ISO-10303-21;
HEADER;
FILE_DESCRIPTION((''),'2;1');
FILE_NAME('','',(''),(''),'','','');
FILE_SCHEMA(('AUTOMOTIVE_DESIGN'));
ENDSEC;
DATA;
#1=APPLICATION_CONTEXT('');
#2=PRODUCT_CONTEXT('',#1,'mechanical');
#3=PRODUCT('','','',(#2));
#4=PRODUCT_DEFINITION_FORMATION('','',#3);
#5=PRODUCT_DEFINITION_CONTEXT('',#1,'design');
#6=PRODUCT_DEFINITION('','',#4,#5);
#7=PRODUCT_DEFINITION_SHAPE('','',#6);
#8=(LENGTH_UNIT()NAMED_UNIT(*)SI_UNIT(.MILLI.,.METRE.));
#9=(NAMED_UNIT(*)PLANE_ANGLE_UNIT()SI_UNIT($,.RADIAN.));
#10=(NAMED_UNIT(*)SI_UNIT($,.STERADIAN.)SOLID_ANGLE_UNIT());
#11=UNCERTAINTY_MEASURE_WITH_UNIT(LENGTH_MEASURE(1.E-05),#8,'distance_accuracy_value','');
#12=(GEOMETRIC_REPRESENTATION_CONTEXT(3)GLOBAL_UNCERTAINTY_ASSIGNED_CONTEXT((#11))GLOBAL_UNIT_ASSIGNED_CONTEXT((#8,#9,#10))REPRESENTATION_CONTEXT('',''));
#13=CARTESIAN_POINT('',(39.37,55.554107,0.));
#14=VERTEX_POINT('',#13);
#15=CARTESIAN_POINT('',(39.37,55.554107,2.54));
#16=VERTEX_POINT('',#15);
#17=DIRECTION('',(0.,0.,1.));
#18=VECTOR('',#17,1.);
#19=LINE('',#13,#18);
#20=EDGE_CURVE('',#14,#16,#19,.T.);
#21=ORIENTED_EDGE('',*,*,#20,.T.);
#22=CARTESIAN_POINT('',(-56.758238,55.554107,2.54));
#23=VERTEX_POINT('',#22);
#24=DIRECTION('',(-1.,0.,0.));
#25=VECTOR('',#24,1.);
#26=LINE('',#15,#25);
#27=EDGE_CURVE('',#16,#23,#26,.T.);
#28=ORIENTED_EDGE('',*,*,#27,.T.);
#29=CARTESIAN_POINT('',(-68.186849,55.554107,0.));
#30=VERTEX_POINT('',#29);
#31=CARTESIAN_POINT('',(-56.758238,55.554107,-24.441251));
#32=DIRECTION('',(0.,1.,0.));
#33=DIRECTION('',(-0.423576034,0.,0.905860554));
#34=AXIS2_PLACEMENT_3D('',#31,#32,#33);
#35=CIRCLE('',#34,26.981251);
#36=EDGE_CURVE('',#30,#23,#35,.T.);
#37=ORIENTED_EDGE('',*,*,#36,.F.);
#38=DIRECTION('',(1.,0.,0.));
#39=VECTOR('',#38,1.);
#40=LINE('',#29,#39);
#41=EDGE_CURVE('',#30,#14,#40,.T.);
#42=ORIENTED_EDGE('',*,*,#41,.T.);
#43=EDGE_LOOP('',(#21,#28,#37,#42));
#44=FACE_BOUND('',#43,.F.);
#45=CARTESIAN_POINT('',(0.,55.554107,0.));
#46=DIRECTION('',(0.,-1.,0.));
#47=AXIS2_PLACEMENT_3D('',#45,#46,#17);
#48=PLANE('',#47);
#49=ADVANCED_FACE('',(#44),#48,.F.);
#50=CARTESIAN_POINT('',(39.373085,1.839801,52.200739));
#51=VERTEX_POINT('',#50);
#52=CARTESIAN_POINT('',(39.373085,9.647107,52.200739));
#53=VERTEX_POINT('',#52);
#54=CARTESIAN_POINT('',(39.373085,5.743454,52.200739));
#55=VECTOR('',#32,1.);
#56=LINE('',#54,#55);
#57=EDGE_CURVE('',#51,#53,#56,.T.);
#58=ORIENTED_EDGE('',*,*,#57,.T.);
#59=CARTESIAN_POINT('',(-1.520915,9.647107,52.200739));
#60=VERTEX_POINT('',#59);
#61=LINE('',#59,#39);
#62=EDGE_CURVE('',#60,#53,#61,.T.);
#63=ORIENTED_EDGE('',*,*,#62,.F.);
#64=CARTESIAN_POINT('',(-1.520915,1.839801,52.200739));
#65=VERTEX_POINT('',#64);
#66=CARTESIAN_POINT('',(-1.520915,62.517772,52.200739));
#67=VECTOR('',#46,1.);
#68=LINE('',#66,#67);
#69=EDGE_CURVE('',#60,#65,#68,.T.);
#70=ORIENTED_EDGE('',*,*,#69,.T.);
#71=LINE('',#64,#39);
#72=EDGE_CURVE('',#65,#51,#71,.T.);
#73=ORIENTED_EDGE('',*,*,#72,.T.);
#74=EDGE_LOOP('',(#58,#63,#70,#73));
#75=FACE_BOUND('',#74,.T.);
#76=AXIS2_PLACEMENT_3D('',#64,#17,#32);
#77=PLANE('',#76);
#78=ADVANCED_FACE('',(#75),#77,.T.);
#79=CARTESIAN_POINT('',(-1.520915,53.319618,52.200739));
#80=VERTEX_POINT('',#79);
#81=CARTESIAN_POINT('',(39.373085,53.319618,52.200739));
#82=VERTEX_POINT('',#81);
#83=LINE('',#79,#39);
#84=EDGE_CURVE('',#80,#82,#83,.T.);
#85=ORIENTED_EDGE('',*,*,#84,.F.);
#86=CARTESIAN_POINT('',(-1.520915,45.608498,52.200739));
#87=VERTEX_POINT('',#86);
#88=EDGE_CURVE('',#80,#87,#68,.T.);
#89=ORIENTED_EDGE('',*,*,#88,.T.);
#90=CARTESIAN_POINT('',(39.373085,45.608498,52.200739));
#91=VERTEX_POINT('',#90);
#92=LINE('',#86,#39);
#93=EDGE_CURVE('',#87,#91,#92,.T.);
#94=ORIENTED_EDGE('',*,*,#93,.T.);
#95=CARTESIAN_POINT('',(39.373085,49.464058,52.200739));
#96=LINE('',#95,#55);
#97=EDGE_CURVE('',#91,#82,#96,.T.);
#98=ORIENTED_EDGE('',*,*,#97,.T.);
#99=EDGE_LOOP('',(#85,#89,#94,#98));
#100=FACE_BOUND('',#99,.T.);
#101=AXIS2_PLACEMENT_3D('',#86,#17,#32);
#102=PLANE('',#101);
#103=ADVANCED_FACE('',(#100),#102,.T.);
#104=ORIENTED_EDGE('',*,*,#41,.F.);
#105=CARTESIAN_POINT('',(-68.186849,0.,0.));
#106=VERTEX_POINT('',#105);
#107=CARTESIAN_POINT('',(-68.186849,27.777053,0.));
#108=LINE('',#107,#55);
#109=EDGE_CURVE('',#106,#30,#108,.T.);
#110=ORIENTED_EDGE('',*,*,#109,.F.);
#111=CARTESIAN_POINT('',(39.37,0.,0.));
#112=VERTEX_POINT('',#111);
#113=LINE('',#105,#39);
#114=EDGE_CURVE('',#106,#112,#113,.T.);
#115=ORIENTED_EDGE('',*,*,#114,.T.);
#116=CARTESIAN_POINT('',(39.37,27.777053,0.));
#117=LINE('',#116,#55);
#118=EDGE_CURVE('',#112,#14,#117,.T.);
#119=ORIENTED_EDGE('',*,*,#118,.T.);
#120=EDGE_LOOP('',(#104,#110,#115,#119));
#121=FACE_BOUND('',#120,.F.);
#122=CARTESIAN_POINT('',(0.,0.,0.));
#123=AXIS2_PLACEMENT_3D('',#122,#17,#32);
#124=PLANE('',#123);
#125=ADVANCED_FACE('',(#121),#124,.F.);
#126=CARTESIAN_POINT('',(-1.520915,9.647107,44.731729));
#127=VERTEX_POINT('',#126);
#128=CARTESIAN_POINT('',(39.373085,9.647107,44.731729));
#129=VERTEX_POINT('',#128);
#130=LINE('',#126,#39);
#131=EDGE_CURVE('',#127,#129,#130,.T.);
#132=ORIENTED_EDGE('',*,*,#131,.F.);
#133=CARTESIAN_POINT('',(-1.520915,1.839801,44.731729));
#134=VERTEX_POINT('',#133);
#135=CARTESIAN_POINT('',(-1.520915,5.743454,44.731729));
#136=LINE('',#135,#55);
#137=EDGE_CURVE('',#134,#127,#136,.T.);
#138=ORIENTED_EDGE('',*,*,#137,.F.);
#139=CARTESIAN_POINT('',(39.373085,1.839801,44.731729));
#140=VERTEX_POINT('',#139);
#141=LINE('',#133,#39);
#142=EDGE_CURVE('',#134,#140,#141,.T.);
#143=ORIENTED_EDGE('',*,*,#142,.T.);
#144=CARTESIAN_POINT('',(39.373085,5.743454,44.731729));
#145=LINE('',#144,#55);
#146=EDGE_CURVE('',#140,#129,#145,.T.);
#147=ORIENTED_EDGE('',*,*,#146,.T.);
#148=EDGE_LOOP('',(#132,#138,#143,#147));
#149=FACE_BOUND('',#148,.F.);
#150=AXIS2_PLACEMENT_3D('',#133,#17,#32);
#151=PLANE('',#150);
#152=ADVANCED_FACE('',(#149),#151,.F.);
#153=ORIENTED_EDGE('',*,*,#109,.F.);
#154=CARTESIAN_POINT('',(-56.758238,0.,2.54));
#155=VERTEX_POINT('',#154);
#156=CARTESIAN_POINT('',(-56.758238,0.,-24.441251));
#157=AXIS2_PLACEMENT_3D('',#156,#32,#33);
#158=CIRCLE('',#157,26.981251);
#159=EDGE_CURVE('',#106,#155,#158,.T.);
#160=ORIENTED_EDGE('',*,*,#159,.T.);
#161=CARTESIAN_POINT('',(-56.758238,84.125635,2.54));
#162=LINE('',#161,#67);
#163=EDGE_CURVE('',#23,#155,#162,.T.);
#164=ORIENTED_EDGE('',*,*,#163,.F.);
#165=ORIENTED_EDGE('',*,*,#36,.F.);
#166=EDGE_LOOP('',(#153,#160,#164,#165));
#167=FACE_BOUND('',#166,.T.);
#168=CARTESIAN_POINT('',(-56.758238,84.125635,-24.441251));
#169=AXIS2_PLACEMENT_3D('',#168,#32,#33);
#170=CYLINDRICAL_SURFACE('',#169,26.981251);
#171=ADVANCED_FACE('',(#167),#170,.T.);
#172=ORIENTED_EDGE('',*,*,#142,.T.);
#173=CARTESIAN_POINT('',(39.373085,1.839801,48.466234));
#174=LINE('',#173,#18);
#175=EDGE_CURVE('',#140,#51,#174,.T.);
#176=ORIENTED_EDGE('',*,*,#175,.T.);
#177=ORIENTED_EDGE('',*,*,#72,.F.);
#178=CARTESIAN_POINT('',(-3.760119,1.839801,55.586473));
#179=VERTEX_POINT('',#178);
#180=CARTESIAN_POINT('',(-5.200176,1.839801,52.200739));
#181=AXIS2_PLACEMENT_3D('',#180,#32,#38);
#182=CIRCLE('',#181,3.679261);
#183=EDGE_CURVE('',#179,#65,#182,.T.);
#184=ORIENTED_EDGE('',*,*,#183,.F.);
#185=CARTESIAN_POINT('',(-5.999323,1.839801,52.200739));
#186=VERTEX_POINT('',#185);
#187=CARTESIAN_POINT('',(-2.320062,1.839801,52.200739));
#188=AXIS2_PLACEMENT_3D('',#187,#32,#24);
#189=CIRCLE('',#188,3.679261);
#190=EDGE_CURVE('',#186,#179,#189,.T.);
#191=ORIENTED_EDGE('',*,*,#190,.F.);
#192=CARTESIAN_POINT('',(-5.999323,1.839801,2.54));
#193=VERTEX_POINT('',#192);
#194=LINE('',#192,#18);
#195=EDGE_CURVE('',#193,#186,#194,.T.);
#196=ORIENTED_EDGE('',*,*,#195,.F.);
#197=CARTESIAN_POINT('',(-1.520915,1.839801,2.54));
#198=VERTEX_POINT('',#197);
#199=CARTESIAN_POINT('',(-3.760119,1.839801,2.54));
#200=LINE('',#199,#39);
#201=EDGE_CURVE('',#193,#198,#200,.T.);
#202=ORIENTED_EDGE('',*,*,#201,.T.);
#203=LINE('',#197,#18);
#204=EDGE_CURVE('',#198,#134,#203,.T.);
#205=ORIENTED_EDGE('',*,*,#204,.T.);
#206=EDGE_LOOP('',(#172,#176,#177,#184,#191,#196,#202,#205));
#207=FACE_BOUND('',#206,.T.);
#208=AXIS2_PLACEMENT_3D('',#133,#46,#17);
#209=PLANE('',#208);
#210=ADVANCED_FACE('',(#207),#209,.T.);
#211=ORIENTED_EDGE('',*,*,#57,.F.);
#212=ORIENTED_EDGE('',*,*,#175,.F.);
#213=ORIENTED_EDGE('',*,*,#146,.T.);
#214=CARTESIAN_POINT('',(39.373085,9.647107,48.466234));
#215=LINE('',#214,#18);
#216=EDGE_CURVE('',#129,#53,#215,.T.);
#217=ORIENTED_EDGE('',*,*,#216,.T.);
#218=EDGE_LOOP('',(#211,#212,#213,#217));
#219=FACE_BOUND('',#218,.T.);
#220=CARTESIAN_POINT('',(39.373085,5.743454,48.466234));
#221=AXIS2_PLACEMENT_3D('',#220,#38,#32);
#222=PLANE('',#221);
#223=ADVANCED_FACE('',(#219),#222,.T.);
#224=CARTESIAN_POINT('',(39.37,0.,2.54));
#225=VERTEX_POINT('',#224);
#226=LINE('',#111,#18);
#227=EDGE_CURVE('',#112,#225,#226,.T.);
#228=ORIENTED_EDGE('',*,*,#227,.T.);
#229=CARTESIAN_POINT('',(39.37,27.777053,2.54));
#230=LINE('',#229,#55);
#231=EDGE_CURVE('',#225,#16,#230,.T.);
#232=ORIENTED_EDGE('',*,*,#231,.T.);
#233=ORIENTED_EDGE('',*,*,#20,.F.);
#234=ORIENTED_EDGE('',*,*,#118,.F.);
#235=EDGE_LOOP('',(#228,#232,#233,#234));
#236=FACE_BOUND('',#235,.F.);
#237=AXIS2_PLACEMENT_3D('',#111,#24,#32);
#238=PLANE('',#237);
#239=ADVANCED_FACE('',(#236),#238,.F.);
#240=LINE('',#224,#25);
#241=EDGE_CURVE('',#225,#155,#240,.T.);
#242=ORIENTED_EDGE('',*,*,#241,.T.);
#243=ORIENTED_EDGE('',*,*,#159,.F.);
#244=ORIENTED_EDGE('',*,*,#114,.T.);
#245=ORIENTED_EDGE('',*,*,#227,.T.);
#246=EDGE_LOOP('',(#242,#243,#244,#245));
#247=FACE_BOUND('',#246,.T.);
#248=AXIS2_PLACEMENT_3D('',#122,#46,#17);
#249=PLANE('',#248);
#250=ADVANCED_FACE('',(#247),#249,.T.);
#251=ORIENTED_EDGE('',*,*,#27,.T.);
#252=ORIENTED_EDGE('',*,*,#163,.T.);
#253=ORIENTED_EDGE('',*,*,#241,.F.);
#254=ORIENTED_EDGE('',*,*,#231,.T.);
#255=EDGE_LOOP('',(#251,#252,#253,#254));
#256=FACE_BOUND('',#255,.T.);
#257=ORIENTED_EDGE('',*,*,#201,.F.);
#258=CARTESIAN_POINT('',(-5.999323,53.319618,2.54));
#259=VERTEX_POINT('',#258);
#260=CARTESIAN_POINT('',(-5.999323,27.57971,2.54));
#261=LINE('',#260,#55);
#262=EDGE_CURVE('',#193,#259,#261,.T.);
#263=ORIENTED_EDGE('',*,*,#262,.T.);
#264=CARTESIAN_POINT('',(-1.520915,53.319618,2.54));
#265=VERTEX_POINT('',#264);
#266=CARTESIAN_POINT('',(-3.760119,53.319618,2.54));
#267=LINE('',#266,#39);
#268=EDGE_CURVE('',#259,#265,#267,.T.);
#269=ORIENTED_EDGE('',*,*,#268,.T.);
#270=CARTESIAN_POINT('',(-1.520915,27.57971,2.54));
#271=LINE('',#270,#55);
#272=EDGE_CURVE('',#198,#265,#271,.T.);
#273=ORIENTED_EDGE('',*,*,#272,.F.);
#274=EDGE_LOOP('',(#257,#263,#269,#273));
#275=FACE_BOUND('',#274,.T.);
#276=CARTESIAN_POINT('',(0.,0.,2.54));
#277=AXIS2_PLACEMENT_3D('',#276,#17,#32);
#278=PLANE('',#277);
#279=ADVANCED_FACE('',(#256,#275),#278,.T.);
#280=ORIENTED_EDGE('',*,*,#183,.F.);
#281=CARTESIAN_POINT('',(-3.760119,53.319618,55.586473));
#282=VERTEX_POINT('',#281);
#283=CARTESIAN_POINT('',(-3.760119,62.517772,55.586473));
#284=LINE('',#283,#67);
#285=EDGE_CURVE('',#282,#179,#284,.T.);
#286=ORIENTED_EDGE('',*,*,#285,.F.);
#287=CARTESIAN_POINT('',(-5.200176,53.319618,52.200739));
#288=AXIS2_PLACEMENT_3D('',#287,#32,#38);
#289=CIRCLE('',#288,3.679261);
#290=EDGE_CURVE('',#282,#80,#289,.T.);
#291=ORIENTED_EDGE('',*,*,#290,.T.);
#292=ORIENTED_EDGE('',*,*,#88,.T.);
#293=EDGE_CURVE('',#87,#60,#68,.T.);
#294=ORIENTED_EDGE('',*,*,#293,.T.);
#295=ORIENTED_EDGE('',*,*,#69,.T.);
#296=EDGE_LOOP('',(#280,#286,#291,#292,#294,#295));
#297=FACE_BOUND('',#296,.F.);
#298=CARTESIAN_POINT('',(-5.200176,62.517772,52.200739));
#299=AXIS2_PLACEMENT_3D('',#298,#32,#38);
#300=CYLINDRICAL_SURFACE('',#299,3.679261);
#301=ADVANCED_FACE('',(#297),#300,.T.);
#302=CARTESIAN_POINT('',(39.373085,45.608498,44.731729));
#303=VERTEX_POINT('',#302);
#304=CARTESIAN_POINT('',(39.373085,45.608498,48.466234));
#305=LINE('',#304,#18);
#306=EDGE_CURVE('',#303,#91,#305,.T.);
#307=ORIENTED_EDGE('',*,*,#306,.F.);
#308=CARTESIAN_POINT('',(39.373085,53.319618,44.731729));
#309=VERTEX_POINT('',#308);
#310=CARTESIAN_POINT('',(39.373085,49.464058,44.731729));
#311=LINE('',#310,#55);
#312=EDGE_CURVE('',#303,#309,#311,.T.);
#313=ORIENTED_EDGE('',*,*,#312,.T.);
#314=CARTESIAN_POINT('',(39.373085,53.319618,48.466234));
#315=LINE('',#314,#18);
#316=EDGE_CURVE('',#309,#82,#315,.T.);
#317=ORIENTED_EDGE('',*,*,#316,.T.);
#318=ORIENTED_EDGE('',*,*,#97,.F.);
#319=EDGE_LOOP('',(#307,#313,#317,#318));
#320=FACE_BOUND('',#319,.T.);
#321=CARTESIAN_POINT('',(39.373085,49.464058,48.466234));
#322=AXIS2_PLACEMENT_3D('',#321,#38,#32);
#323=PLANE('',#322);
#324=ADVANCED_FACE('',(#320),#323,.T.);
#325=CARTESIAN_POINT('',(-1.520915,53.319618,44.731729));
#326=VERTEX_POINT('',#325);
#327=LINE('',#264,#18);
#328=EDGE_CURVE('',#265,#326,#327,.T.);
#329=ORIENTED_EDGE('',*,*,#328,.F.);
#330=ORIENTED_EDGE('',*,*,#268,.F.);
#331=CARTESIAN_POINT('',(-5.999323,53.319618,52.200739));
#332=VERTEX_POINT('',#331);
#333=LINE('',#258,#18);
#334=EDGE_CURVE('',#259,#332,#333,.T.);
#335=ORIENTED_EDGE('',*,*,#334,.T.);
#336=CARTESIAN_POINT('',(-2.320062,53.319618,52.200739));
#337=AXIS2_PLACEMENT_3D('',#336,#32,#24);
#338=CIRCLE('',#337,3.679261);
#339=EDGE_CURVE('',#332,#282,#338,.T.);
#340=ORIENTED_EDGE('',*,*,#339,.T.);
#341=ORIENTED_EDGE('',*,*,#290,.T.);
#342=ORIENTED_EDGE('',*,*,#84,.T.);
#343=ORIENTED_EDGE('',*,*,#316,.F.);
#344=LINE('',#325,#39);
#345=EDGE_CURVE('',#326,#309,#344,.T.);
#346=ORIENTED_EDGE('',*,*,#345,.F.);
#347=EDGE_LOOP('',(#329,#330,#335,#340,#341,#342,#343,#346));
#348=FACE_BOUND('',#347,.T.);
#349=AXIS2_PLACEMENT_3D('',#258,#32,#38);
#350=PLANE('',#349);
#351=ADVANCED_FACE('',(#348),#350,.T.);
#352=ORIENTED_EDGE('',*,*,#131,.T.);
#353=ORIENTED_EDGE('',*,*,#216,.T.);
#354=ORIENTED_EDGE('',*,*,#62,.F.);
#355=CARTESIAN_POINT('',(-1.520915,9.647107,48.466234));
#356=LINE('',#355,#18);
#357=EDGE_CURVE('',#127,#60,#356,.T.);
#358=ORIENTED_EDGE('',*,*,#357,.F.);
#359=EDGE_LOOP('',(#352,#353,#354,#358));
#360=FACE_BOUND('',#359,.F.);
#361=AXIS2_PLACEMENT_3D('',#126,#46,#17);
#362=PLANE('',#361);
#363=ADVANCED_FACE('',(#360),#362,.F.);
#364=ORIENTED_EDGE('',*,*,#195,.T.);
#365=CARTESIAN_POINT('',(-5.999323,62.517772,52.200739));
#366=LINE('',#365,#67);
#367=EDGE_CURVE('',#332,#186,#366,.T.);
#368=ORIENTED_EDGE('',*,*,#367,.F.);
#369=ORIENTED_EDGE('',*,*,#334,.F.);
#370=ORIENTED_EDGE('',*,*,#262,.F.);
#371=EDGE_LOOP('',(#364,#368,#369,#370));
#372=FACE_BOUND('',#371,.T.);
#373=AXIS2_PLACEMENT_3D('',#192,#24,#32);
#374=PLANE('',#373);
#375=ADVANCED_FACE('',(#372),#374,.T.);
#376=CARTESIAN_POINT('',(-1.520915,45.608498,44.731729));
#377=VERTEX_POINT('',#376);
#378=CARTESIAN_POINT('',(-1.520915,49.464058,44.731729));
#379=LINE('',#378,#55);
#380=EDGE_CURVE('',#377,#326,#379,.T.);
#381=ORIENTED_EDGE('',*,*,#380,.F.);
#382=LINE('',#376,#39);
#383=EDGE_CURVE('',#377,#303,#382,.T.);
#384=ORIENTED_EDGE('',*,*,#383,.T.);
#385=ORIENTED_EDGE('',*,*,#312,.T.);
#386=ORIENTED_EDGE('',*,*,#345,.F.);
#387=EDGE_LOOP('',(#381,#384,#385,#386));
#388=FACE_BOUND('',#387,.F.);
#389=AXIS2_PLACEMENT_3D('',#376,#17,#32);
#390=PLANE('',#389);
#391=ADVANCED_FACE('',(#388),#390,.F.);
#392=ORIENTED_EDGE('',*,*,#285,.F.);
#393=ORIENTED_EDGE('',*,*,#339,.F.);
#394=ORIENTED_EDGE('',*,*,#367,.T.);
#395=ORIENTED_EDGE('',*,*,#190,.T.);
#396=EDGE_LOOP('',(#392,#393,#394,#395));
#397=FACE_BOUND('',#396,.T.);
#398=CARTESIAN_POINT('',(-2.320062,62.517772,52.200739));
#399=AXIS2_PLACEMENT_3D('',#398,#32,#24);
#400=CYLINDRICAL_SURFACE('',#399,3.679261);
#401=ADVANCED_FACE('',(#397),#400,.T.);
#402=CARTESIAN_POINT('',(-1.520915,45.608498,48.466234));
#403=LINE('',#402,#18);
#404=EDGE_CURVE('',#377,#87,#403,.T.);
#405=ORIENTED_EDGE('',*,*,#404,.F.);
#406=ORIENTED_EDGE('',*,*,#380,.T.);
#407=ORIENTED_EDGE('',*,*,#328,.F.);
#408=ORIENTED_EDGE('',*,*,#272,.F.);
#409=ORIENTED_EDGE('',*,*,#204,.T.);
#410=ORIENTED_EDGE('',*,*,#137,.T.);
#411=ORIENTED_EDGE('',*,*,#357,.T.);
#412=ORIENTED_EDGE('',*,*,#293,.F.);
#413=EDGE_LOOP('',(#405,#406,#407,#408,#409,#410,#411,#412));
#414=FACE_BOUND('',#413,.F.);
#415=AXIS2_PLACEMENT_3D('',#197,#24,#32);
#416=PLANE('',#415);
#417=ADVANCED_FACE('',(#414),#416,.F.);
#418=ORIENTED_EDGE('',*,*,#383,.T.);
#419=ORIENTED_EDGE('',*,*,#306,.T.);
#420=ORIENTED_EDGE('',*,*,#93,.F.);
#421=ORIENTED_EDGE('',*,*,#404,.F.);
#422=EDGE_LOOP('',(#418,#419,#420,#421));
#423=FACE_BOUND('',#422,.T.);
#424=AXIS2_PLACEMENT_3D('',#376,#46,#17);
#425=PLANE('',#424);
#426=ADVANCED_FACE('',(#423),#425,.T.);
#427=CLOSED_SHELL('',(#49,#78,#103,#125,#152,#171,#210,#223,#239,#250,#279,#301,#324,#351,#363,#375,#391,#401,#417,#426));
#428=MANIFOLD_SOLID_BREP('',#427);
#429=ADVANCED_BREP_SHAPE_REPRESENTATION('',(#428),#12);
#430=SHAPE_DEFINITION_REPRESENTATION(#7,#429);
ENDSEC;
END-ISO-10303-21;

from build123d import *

# Parameters (mm, degrees)
F0_W        = 68.1868493557
F0_H        = 55.5541068316
F1_DEPTH    = 2.54
F2_T1_DEPTH = 112.6971628242
F3_W        = 4.4784088386
F3_H        = 51.4798170188
F4_DEPTH    = 53.34
F5_T1_DEPTH = 69.8761243641
F6_W        = 7.8073056648
F6_H        = 7.4690097984
F6_W_2      = 7.7111199498
F7_DEPTH    = 40.894
F8_DEPTH    = 39.37


# Not quite as in the source:
# - a fillet or chamfer that OpenCascade refuses, or shapes differently, is made with other operations: its cross-section is extruded or revolved along the edge and cut away or added


with BuildPart() as f1:
    # F0 (on Top) → F1 (new body)
    with BuildSketch(Plane.XY):
        with Locations((-34.0934246778, 27.7770534158)):
            Rectangle(F0_W, F0_H)
    extrude(amount=F1_DEPTH)

    # F2: fillet of radius 26.9812507731 on 1 edges, made by hand

    # F2_s2 → F2_t1 (cut)
    with BuildSketch(Plane.XZ.offset(-84.1256348279)):
        with BuildLine():
            ThreePointArc((-68.1868493557, 0), (-62.6119710245, 1.8973464712), (-56.7582381572, 2.54))
            Line((-56.7582381572, 2.54), (-68.1868493557, 2.54))
            Line((-68.1868493557, 2.54), (-68.1868493557, 0))
        make_face()
    extrude(amount=F2_T1_DEPTH, mode=Mode.SUBTRACT)

    # F3 (on face) → F4 (join)
    with BuildSketch(Plane.XY.offset(2.54)):
        with Locations((-3.760119027, 27.5797095965)):
            Rectangle(F3_W, F3_H)
    extrude(amount=F4_DEPTH)

    # F5: fillet of radius 3.6792614691 on 2 edges, made by hand

    # F5_s2 → F5_t1 (cut)
    with BuildSketch(Plane.XZ.offset(-62.5177717785)):
        with BuildLine():
            ThreePointArc((-1.5209146077, 52.2007385309), (-2.5985453422, 54.8023692655), (-5.2001760767, 55.88))
            Line((-5.2001760767, 55.88), (-1.5209146077, 55.88))
            Line((-1.5209146077, 55.88), (-1.5209146077, 52.2007385309))
        make_face()
        with BuildLine():
            ThreePointArc((-5.9993234463, 52.2007385309), (-4.9216927118, 54.8023692655), (-2.3200619772, 55.88))
            Line((-2.3200619772, 55.88), (-5.9993234463, 55.88))
            Line((-5.9993234463, 55.88), (-5.9993234463, 52.2007385309))
        make_face()
    extrude(amount=F5_T1_DEPTH, mode=Mode.SUBTRACT)

    # F6 (on face) → F7 (join)
    with BuildSketch(Plane.YZ.offset(-1.5209146077)):
        with Locations((5.7434539194, 48.4662336318)):
            Rectangle(F6_W, F6_H)
        with Locations((49.464058131, 48.4662336318)):
            Rectangle(F6_W_2, F6_H)
    extrude(amount=F7_DEPTH)

    # F8 (add): a face of the model
    f8_faces = [f1.faces().sort_by_distance(p)[0] for p in [
        (0, 27.7770534158, 1.27),
    ]]
    extrude(f8_faces, amount=F8_DEPTH)


solid = f1.part
